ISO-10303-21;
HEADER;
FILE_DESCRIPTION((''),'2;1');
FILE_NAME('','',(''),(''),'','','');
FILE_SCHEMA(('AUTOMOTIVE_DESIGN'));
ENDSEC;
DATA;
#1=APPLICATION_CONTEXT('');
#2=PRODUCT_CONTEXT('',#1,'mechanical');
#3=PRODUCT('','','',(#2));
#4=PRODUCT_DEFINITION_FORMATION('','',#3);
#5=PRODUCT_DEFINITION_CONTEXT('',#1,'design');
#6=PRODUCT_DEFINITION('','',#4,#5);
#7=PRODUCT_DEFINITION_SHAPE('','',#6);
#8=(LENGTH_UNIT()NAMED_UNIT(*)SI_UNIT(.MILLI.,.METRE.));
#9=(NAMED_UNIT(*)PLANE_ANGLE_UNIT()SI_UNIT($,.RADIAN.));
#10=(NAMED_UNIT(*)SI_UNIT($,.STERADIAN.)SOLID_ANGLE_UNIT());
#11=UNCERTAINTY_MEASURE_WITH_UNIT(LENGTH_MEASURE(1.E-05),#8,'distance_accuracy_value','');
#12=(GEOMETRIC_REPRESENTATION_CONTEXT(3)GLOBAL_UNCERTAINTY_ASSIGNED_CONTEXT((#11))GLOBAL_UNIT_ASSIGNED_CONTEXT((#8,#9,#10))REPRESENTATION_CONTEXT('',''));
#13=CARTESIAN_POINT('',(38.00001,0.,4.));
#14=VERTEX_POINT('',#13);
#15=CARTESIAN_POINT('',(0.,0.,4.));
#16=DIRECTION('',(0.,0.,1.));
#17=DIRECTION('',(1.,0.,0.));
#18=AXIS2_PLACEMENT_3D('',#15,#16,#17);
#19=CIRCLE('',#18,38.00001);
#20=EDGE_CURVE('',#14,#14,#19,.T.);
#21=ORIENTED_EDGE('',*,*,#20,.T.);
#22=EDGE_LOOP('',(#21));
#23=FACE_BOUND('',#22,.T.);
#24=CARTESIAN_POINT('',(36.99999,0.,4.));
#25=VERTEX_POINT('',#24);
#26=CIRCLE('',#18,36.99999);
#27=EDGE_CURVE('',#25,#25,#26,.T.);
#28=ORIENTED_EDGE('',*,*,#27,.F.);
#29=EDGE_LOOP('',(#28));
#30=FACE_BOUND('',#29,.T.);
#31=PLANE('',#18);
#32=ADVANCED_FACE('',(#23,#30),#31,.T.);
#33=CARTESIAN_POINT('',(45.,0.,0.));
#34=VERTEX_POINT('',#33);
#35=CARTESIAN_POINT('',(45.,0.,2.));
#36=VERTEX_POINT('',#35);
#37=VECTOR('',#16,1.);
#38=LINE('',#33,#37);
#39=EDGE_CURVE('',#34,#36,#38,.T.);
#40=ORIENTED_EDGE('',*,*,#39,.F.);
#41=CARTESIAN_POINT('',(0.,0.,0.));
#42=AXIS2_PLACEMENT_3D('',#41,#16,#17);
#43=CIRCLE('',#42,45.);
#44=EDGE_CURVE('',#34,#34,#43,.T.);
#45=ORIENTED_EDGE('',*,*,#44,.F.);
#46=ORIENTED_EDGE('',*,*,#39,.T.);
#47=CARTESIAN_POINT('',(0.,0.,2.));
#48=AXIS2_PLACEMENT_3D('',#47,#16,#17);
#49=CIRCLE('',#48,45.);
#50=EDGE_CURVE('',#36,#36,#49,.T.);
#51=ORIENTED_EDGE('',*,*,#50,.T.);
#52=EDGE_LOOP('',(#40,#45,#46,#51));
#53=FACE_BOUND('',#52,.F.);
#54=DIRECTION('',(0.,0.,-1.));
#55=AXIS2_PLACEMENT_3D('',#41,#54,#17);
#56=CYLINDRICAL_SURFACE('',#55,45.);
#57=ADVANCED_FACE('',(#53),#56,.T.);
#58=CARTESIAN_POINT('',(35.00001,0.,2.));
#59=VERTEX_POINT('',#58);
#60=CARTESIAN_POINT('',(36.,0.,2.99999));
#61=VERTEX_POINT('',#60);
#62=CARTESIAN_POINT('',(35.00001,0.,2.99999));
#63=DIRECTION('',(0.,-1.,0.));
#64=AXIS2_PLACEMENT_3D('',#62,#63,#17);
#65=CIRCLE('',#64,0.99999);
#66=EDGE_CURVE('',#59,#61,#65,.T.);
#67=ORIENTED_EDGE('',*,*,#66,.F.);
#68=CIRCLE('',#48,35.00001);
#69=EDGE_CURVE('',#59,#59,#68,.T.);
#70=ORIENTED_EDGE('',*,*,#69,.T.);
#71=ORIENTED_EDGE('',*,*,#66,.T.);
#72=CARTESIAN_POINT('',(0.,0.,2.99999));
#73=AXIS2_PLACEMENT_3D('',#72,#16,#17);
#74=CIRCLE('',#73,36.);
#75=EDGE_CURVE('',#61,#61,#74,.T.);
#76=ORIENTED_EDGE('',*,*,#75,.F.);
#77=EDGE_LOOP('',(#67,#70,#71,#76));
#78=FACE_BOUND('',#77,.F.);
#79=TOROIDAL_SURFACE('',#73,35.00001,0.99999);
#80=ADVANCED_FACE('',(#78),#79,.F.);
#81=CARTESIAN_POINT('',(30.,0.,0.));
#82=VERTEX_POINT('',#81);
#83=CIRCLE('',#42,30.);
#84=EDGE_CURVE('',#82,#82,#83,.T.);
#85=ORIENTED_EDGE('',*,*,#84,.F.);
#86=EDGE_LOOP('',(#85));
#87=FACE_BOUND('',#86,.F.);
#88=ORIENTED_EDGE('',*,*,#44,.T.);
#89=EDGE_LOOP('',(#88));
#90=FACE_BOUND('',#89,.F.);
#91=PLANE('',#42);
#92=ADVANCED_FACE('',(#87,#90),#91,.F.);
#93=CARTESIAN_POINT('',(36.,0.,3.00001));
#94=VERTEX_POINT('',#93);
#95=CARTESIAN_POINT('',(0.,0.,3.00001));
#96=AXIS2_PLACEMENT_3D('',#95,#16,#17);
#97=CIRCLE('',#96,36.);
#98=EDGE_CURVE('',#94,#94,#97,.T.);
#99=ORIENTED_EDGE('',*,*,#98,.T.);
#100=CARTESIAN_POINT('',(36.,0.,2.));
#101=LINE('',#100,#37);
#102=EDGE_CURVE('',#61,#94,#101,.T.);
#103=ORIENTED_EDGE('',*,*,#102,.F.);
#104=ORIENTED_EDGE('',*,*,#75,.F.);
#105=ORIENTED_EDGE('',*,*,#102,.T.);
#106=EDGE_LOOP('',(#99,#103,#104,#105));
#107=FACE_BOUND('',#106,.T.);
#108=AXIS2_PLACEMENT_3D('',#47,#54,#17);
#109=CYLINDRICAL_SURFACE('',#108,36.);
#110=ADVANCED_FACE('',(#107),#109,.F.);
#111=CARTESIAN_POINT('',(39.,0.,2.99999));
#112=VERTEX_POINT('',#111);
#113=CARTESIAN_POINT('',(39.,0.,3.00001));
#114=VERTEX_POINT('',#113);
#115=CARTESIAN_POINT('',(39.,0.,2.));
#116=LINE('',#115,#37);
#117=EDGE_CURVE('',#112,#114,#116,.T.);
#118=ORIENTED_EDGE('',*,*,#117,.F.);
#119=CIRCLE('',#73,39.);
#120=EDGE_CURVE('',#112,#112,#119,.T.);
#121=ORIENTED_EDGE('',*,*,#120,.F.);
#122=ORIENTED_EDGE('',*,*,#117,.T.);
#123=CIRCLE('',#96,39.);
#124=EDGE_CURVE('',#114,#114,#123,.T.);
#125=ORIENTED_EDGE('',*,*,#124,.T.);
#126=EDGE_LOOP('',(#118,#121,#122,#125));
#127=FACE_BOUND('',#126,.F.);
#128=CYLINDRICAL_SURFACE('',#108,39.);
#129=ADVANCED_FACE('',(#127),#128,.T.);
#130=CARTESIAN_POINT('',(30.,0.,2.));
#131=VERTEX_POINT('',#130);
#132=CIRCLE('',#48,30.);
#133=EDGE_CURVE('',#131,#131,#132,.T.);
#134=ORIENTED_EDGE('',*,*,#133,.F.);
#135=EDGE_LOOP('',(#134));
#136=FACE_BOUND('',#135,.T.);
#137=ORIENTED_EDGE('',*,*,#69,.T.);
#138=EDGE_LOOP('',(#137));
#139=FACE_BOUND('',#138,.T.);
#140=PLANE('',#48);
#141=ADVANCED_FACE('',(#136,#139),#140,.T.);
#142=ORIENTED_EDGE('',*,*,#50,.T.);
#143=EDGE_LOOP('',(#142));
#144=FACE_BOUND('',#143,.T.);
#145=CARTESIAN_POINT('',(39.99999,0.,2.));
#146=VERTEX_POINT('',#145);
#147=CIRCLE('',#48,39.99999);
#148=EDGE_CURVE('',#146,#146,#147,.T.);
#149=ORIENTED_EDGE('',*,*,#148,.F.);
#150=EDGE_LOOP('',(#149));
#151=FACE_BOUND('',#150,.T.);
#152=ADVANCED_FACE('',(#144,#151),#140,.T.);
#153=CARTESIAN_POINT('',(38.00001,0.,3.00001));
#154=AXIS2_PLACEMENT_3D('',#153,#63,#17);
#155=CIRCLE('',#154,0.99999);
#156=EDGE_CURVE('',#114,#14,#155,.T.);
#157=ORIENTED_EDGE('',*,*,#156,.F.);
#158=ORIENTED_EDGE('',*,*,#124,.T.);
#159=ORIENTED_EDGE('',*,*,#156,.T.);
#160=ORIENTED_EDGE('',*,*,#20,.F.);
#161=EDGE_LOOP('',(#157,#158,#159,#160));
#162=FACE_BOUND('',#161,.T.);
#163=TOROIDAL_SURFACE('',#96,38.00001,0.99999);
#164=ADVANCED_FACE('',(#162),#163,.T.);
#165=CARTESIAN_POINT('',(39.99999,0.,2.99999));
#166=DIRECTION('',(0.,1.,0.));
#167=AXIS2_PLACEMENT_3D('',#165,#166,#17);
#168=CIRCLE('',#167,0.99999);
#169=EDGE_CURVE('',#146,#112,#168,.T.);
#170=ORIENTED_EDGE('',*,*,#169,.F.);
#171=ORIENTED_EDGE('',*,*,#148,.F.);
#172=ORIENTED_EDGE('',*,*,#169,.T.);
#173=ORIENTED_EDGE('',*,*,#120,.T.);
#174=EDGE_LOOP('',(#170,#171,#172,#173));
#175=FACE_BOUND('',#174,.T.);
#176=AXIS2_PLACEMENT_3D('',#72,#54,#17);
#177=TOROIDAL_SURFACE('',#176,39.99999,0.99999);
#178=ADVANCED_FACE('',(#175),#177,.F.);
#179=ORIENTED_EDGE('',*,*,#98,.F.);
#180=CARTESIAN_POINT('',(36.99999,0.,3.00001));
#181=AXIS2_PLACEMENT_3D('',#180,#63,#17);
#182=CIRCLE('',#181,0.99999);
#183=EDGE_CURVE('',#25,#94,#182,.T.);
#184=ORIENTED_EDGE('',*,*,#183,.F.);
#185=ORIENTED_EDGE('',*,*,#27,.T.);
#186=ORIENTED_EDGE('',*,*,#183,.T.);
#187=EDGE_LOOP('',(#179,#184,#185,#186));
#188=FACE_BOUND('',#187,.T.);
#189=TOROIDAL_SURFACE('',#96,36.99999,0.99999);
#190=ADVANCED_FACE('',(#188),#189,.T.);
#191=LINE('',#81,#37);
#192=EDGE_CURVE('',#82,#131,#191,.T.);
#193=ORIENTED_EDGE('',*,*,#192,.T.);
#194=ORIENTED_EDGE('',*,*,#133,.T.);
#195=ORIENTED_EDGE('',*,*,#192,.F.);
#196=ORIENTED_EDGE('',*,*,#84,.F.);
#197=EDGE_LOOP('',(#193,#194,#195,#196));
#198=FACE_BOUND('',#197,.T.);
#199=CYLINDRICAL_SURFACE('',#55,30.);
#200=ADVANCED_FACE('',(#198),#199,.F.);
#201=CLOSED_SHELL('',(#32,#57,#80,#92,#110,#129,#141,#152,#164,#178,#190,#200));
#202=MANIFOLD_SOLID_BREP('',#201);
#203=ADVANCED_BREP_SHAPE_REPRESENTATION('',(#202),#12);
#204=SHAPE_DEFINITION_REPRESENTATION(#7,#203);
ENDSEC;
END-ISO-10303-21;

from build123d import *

# Parameters (mm, degrees)
F0_R     = 45
F0_R_2   = 30
F1_DEPTH = 2
F2_R     = 39
F2_R_2   = 36
F3_DEPTH = 2
F4_R     = 0.99999


# Not quite as in the source:
# - a fillet or chamfer is up to 0.001 mm smaller than in the source, because OpenCascade refuses the exact size


with BuildPart() as f1:
    # F0 (on Top) → F1 (new body)
    with BuildSketch(Plane.XY):
        Circle(F0_R)
        Circle(F0_R_2, mode=Mode.SUBTRACT)
    extrude(amount=F1_DEPTH)

    # F2 (on face) → F3 (join)
    with BuildSketch(Plane.XY.offset(2)):
        Circle(F2_R)
        Circle(F2_R_2, mode=Mode.SUBTRACT)
    extrude(amount=F3_DEPTH)

    # F4 (radius 1 in the source; OpenCascade refuses exactly that, so slightly less here)
    f4_edges = [f1.edges().sort_by_distance(p)[0] for p in [
        (-39, 0, 2),
        (-39, 0, 4),
        (-36, 0, 4),
        (-36, 0, 2),
    ]]
    fillet(f4_edges, radius=F4_R)


solid = f1.part
